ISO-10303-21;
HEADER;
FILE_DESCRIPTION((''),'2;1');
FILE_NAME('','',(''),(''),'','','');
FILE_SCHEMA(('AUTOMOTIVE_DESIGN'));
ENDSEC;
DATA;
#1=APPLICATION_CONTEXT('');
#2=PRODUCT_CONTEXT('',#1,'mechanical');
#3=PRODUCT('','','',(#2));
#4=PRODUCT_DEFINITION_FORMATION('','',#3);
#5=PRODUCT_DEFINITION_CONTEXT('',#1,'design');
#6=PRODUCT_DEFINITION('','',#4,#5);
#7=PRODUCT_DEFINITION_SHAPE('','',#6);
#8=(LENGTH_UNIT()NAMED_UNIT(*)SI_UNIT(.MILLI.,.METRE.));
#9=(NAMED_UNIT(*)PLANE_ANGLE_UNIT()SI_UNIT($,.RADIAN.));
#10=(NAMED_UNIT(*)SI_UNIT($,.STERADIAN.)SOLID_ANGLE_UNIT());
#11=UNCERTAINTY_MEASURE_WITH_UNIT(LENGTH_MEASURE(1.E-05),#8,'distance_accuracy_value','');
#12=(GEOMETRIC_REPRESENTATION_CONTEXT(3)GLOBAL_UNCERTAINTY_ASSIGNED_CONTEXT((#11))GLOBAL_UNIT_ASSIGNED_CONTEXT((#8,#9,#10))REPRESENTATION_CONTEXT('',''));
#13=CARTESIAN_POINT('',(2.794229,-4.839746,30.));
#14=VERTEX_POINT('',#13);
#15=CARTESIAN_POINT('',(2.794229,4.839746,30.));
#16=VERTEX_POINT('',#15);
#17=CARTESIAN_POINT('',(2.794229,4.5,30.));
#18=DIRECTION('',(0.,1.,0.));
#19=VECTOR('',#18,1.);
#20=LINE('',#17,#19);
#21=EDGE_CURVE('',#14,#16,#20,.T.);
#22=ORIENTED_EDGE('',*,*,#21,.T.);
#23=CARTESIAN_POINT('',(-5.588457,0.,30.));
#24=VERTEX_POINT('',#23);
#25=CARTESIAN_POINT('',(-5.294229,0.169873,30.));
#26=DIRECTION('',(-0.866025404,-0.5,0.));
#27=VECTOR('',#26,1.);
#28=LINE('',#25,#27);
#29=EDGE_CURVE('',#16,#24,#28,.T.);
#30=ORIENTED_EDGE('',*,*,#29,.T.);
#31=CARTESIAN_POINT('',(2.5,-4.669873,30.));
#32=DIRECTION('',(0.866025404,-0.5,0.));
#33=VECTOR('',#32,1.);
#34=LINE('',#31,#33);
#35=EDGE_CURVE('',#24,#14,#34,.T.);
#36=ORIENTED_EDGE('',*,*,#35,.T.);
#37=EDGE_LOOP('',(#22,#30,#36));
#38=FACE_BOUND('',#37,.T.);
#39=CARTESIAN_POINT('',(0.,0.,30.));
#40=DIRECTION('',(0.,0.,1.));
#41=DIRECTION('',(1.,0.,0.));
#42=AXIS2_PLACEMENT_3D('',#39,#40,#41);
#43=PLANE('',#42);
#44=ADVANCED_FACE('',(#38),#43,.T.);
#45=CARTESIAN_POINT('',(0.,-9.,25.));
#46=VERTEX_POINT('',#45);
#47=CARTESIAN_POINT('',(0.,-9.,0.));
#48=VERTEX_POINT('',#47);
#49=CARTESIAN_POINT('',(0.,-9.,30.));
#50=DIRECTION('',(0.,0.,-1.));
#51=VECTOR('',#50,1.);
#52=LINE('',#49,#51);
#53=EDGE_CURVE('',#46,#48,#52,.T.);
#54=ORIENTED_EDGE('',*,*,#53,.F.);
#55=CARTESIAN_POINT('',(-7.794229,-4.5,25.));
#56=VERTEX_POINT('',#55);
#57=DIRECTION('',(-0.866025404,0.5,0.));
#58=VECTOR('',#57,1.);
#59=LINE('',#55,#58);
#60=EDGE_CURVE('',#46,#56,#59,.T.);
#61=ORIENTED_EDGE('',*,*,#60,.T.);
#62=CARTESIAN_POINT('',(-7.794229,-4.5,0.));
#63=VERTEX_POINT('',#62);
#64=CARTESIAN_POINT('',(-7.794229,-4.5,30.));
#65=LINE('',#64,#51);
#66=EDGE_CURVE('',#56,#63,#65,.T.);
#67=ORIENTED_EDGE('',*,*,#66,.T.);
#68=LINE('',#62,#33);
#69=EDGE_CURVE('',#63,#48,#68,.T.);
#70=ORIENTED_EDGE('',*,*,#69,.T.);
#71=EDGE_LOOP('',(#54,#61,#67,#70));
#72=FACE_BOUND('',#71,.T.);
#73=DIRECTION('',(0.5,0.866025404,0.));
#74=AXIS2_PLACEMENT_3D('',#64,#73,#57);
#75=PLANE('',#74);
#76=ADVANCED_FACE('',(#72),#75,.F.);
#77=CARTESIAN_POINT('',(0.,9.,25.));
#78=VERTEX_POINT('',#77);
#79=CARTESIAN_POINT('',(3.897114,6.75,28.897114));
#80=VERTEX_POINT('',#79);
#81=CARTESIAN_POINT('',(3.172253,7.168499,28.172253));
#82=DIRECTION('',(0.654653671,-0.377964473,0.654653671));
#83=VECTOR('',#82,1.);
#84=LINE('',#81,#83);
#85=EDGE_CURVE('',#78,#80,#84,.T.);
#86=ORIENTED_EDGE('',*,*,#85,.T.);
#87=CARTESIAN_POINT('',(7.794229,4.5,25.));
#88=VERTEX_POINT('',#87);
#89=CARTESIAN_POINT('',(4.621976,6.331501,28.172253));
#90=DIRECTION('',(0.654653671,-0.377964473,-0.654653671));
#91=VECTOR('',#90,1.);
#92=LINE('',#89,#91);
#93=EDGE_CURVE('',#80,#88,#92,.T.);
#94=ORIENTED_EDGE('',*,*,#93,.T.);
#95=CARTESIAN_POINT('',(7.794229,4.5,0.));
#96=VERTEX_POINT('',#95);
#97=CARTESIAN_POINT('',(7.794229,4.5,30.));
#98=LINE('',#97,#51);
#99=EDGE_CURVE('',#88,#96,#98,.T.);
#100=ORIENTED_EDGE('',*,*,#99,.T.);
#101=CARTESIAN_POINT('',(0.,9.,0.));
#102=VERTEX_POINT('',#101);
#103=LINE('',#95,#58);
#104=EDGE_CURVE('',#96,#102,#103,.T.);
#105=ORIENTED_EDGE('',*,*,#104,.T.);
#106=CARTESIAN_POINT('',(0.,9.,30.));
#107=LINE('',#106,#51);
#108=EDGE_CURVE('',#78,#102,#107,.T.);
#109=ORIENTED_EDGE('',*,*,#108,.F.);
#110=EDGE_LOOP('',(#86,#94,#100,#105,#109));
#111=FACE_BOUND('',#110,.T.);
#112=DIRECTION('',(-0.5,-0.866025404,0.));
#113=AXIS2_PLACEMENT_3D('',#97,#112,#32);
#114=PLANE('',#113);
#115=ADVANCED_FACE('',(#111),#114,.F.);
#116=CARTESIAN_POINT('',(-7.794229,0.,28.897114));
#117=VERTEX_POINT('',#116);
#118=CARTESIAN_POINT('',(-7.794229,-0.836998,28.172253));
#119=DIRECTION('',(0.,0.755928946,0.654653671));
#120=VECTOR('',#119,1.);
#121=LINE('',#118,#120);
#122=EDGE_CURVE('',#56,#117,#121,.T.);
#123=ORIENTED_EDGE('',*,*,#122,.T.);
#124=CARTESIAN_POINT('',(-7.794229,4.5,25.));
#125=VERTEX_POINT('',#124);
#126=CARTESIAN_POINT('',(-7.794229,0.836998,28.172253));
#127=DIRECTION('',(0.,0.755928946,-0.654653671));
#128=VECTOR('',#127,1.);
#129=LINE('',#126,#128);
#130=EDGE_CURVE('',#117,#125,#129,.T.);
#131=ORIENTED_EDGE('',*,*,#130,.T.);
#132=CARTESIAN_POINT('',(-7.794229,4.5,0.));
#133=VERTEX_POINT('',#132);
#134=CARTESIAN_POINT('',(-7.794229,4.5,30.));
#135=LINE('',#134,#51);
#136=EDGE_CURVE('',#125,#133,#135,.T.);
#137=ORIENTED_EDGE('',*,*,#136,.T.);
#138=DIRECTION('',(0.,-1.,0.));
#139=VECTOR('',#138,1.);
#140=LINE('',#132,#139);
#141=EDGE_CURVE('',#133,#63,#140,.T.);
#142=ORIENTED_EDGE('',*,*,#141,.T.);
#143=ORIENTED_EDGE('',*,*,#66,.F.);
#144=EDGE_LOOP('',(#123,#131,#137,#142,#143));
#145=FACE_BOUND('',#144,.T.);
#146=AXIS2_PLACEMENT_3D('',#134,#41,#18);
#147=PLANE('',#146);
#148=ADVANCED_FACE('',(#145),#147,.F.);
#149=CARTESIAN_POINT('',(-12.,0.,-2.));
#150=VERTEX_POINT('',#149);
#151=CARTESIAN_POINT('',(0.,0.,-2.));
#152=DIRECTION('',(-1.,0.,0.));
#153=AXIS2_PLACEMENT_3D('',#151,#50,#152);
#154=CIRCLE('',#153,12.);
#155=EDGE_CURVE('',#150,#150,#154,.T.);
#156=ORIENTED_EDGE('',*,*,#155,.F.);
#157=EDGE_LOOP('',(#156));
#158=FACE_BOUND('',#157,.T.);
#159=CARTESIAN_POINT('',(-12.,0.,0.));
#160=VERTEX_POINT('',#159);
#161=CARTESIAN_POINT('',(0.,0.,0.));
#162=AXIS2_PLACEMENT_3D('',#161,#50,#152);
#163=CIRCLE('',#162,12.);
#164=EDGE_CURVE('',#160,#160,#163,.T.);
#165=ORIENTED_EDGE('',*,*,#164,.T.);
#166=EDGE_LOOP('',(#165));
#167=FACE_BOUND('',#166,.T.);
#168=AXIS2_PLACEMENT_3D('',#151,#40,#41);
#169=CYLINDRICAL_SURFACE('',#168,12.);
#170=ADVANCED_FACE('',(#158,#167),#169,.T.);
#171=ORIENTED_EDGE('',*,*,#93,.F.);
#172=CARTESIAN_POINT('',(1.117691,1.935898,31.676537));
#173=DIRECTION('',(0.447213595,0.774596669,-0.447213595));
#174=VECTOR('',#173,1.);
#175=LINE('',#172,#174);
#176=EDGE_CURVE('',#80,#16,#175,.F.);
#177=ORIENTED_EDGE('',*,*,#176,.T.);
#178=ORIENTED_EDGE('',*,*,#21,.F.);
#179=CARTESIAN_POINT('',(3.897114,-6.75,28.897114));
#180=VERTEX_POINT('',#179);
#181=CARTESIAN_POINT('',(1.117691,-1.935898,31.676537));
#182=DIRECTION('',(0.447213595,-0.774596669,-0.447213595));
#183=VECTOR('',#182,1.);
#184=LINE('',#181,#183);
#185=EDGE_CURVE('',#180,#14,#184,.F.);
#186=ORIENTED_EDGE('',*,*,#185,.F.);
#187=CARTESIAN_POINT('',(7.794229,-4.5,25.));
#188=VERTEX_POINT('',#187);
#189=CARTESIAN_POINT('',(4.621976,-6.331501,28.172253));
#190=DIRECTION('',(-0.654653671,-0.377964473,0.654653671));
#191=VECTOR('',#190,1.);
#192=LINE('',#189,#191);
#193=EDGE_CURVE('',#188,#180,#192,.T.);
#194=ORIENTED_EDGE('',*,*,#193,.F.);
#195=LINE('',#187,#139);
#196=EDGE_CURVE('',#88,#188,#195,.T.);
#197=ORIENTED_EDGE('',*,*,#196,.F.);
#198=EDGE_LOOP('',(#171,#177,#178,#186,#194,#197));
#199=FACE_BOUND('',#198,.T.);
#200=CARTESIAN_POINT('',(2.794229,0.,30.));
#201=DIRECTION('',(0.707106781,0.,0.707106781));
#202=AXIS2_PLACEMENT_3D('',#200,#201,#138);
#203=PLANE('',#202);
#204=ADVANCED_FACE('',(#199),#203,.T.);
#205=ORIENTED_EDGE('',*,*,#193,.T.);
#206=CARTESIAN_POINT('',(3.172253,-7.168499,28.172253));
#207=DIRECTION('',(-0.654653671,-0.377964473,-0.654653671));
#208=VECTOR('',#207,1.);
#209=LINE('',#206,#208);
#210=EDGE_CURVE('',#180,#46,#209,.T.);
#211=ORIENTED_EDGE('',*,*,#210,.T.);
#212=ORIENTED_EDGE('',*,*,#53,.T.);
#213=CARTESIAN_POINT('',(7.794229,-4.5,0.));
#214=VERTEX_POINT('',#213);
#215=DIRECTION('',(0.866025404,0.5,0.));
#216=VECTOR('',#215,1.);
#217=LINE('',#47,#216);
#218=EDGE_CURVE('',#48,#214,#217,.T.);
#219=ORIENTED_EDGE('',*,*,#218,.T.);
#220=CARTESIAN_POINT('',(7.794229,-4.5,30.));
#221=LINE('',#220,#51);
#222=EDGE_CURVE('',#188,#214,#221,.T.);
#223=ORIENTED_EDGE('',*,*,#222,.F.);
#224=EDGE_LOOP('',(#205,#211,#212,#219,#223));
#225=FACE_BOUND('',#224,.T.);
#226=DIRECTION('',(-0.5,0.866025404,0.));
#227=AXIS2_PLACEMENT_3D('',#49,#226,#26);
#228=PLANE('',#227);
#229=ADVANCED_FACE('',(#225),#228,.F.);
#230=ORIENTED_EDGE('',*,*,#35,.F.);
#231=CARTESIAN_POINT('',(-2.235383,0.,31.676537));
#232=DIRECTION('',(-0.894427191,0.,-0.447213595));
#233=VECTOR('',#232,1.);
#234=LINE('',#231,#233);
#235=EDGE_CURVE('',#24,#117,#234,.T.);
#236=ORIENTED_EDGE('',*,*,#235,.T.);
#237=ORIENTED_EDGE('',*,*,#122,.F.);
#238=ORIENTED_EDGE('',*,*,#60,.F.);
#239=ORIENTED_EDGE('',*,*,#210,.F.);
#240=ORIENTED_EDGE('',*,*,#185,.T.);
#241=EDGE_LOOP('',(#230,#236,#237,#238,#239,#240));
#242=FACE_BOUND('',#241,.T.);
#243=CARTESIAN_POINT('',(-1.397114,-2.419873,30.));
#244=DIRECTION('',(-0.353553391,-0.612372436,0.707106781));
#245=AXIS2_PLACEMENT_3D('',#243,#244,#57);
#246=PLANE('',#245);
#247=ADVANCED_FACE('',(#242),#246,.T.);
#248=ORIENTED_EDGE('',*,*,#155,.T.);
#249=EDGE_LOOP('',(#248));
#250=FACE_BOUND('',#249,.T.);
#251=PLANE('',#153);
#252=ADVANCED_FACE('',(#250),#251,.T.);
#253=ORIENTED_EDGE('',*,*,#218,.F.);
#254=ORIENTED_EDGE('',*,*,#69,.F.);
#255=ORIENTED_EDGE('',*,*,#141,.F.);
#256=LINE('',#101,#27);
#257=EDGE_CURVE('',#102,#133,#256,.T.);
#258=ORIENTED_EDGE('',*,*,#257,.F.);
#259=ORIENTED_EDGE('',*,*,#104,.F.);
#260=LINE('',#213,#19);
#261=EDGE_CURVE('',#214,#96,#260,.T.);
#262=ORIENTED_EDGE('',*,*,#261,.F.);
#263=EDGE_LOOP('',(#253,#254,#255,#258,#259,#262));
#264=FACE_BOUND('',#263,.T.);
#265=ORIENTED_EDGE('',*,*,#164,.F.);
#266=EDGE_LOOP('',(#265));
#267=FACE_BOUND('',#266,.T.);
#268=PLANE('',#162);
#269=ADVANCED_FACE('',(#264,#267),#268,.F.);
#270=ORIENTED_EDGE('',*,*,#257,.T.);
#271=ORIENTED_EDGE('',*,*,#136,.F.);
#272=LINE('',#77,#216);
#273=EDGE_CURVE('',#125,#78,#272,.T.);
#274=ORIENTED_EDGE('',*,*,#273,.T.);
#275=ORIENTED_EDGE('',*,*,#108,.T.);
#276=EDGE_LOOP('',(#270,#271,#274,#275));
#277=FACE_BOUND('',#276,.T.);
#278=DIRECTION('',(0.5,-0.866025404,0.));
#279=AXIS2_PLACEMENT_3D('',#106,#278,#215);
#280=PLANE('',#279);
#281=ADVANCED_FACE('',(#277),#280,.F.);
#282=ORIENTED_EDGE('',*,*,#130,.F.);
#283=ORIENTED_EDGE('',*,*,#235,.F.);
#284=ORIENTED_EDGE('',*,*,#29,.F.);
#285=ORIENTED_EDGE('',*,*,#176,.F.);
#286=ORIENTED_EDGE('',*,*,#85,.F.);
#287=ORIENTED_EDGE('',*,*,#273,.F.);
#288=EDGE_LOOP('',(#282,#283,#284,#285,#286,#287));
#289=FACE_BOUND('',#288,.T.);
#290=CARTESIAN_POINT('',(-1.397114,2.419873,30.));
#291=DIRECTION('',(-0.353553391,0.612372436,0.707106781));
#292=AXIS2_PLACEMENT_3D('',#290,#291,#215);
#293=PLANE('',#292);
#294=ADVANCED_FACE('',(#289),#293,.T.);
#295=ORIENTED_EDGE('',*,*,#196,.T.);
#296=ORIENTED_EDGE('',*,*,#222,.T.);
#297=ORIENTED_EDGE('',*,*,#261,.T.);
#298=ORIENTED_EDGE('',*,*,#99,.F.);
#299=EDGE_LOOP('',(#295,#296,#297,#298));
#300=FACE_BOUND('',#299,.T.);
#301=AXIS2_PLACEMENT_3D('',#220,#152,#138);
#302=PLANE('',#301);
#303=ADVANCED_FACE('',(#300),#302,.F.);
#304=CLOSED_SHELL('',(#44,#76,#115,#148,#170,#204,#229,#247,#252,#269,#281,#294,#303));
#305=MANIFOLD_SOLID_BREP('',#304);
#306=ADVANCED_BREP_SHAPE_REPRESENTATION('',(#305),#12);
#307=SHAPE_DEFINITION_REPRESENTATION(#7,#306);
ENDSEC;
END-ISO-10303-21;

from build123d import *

# Parameters (mm, degrees)
SALIENTE_EXTRUIR1_DEPTH = 30
CROQUIS2_R              = 12
SALIENTE_EXTRUIR2_DEPTH = 2
CHAMFER1_SIZE           = 5


with BuildPart() as part:
    # Croquis1 → Saliente-Extruir1 (new body)
    with BuildSketch(Plane.XY):
        Polygon((0, 9), (-7.794228634, 4.5), (-7.794228634, -4.5), (0, -9), (7.794228634, -4.5), (7.794228634, 4.5), align=None)
    extrude(amount=SALIENTE_EXTRUIR1_DEPTH)

    # Croquis2 → Saliente-Extruir2 (add)
    with BuildSketch(Plane(origin=(0, 0, 0), x_dir=(-1, 0, 0), z_dir=(0, 0, -1))):
        Circle(CROQUIS2_R)
    extrude(amount=SALIENTE_EXTRUIR2_DEPTH)

    # Chamfer1
    # the kernel refuses this chamfer: 5 mm, written as the material it takes off along each edge
    with BuildSketch(Plane(origin=(-18.929942624, 1.92920747, 30), x_dir=(-0.013747938305293065, -0.023812127644090277, -0.9996219169112968), z_dir=(0.8660254037844416, -0.49999999999999495, 0)), Plane(origin=(7.794228634, -17.35841494, 30), x_dir=(0.027495876610586317, 0, -0.9996219169112968), z_dir=(0, 1, 0)), Plane(origin=(11.13571399, 15.42920747, 30), x_dir=(-0.013747938305293275, 0.023812127644090242, -0.9996219169112968), z_dir=(-0.8660254037844379, -0.5000000000000012, 0))) as chamfer1_piece_1:
        Polygon((CHAMFER1_SIZE * 0.999621916911, CHAMFER1_SIZE * 0.0274958766106), (-CHAMFER1_SIZE * 0.0274958766106, CHAMFER1_SIZE * 0.999621916911), (0, 0), align=None)
    extrude(amount=34.71682988, mode=Mode.SUBTRACT)


solid = part.part
